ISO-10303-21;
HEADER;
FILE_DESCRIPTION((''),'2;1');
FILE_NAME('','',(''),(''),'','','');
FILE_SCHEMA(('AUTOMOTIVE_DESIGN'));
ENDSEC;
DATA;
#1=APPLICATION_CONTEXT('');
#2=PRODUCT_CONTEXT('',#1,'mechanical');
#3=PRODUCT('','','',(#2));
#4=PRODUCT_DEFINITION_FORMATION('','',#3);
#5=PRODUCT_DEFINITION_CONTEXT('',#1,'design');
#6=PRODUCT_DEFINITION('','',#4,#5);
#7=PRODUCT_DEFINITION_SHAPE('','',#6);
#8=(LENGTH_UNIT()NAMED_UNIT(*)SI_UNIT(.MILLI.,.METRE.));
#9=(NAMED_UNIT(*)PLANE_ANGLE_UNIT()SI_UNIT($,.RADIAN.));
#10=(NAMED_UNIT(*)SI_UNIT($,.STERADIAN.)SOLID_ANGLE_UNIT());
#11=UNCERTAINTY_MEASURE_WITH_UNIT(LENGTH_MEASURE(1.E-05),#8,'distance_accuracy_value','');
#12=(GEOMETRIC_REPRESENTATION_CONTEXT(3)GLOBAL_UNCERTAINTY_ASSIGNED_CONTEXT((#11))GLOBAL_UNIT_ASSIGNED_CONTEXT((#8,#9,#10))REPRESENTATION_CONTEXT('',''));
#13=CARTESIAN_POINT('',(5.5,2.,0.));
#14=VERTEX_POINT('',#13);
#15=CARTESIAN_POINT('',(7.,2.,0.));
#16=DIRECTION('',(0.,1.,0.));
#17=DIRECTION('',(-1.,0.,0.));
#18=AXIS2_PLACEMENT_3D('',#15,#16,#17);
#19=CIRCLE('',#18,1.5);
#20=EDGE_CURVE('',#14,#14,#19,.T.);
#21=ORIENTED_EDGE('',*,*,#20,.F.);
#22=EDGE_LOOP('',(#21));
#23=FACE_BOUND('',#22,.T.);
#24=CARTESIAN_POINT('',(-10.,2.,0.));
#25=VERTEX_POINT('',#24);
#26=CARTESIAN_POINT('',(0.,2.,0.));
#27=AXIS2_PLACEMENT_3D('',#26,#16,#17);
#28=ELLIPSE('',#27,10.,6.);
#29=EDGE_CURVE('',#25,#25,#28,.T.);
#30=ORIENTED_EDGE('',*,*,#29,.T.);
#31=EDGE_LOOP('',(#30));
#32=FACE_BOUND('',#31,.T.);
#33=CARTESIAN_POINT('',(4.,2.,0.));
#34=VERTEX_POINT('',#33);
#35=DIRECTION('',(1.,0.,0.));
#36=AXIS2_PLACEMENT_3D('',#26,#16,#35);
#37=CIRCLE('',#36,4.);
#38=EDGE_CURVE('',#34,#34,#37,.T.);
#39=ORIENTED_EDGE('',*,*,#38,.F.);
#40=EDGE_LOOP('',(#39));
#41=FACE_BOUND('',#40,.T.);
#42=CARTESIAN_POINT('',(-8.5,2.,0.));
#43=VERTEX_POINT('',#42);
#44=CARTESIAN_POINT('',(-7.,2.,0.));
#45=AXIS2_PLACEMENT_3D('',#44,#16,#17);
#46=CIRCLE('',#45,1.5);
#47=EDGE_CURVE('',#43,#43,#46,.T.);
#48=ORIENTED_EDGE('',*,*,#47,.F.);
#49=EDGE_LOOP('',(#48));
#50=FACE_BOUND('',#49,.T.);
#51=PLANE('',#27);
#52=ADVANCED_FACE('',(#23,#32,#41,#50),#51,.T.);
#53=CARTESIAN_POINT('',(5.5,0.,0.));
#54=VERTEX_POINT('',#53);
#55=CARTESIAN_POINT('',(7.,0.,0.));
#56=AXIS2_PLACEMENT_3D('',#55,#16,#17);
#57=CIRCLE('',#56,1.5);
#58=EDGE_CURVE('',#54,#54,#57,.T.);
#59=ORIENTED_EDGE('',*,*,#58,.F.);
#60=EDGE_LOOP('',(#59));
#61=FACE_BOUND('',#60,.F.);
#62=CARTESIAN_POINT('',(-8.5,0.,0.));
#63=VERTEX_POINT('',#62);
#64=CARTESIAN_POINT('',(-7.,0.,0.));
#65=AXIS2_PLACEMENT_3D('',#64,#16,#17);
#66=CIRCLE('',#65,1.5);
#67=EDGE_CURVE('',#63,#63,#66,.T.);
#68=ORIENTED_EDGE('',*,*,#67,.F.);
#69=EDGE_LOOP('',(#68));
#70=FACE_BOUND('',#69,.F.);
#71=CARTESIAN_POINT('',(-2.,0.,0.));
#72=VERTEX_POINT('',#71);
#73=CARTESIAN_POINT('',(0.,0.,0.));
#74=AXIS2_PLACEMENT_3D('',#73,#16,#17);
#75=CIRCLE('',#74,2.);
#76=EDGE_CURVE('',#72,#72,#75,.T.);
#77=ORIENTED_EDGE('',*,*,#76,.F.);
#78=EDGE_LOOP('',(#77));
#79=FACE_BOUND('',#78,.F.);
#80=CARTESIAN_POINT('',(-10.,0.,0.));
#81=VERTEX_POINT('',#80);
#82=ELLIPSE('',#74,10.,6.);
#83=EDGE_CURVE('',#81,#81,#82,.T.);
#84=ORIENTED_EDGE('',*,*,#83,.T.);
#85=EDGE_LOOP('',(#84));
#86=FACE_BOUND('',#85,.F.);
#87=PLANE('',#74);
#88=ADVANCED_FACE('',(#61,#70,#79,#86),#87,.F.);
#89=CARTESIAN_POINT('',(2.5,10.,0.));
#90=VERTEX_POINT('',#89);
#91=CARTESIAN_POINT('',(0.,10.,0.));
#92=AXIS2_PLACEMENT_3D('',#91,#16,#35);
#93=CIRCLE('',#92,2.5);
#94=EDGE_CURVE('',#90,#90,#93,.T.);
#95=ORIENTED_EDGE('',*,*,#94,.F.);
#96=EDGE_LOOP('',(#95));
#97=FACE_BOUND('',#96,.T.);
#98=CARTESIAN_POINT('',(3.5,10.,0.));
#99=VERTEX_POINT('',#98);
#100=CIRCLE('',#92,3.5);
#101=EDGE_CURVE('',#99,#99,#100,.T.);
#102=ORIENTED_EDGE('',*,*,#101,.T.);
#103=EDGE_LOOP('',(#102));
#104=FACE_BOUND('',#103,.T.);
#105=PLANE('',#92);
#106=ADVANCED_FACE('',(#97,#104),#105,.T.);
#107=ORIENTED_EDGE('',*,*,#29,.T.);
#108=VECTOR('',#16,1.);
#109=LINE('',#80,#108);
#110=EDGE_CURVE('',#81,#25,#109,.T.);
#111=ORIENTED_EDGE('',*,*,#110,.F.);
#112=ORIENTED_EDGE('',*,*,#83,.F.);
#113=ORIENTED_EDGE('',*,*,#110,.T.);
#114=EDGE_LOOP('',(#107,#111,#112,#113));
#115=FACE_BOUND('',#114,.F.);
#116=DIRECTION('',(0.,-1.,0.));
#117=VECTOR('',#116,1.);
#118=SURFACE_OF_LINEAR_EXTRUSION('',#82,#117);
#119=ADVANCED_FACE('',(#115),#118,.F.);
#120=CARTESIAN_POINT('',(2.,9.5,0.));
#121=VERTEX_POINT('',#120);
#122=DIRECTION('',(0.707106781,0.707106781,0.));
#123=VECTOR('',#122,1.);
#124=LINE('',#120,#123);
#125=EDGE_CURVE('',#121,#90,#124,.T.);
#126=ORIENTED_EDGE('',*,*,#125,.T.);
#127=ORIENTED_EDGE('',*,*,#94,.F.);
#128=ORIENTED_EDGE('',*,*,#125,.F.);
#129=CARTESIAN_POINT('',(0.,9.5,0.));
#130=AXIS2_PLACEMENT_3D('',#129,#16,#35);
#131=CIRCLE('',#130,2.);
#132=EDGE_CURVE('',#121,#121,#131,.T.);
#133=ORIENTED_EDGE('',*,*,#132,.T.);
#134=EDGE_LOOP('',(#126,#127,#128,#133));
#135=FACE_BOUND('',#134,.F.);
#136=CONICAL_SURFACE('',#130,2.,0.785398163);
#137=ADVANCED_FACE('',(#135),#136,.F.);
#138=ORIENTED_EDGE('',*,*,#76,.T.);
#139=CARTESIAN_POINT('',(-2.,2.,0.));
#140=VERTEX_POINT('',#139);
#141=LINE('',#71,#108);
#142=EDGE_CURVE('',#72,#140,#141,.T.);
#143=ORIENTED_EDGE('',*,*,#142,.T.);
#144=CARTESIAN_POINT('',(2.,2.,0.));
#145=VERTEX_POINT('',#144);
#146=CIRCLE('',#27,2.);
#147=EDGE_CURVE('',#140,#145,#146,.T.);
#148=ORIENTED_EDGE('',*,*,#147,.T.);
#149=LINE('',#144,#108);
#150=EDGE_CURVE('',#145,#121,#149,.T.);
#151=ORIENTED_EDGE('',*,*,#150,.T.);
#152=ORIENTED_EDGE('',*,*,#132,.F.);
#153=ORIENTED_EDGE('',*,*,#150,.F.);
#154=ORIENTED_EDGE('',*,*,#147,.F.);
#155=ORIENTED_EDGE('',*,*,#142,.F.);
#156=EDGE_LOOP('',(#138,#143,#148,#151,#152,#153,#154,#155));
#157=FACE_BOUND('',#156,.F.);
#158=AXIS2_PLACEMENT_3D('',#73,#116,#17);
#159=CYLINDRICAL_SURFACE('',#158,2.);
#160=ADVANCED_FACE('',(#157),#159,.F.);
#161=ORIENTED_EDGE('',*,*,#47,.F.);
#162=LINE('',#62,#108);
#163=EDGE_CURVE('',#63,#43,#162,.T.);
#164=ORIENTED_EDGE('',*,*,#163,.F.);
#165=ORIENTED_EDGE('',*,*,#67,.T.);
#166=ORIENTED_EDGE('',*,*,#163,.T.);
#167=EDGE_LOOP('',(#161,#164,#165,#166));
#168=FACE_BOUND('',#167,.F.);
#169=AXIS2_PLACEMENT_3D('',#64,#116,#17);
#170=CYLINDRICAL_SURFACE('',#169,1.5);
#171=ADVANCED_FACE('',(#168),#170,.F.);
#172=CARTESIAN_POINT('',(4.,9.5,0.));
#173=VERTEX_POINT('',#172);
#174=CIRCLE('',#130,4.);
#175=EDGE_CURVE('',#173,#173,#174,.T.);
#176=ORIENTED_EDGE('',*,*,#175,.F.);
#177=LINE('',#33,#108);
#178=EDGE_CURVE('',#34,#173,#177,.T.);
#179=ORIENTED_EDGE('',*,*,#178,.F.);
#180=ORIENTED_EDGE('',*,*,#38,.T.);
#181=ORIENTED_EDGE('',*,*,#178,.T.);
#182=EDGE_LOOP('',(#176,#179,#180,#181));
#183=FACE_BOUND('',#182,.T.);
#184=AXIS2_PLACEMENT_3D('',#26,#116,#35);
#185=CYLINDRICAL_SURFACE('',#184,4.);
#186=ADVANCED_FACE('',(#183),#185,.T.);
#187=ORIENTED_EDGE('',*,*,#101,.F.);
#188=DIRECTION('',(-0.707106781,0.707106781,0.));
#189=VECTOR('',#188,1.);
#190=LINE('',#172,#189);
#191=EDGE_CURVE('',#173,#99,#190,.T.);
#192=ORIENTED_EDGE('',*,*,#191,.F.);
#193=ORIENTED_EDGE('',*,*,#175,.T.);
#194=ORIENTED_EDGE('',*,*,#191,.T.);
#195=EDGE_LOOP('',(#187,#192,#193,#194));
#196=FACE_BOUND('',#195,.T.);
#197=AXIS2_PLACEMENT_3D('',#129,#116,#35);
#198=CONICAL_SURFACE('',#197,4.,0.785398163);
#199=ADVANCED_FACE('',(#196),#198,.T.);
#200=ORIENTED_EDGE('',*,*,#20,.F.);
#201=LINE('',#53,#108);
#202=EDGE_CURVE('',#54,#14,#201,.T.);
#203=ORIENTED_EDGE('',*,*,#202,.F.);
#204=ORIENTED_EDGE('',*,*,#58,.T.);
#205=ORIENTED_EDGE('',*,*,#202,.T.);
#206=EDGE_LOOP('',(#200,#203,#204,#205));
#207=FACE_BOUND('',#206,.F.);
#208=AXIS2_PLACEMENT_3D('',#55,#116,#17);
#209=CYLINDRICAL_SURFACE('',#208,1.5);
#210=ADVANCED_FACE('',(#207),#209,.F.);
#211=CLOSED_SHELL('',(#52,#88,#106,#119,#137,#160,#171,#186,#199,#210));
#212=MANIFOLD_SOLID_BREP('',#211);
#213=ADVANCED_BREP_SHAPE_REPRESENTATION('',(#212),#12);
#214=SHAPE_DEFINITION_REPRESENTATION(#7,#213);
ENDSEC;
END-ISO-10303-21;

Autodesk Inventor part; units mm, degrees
ref_plane "YZ Plane" through (0, 0, 0) normal (1, 0, 0) x (0, 1, 0)
ref_plane "XZ Plane" through (0, 0, 0) normal (0, 1, 0) x (-1, 0, 0)
ref_plane "XY Plane" through (0, 0, 0) normal (0, 0, 1) x (1, 0, 0)
sketch "Sketch1" plane through (0, 0, 0) normal (0, 1, 0) x (-1, 0, 0)
  line L0 (0, 0) -> (-10, 0) construction
  line L1 (0, 0) -> (0, 6) construction
  ellipse E0 centre (0, 0) end of major axis (0, 6) minor radius 10 construction
  ellipse E1 centre (0, 0) end of major axis (0, -6) minor radius 10
  circle A0 centre (0, 0) radius 2
  circle A1 centre (7, 0) radius 1.5
  circle A2 centre (-7, 0) radius 1.5
  dimension "d7" = 6
  dimension "d0" = 10
  dimension "d1" = 6
  dimension "d2" = 4
  dimension "d3" = 3
  dimension "d4" = 3
  dimension "d5" = 7
  dimension "d6" = 7
  dimension "d8" = 7
extrude "Extrusion1" add sketch "Sketch1" along normal blind 2
sketch "Sketch2" plane through (0, 2, 0) normal (0, 1, 0) x (1, 0, 0)
  circle A0 centre (0, 0) radius 4
  circle A1 centre (0, 0) radius 2
  dimension "d11" = 8
  dimension "d12" = 4
extrude "Extrusion2" add sketch "Sketch2" along normal blind 8
chamfer "Chamfer1" distance 0.5 angle 45 2 edges at (-4, 10, 0) (-2, 10, 0)
properties part number "Glands" material "Brass, Soft Yellow"
